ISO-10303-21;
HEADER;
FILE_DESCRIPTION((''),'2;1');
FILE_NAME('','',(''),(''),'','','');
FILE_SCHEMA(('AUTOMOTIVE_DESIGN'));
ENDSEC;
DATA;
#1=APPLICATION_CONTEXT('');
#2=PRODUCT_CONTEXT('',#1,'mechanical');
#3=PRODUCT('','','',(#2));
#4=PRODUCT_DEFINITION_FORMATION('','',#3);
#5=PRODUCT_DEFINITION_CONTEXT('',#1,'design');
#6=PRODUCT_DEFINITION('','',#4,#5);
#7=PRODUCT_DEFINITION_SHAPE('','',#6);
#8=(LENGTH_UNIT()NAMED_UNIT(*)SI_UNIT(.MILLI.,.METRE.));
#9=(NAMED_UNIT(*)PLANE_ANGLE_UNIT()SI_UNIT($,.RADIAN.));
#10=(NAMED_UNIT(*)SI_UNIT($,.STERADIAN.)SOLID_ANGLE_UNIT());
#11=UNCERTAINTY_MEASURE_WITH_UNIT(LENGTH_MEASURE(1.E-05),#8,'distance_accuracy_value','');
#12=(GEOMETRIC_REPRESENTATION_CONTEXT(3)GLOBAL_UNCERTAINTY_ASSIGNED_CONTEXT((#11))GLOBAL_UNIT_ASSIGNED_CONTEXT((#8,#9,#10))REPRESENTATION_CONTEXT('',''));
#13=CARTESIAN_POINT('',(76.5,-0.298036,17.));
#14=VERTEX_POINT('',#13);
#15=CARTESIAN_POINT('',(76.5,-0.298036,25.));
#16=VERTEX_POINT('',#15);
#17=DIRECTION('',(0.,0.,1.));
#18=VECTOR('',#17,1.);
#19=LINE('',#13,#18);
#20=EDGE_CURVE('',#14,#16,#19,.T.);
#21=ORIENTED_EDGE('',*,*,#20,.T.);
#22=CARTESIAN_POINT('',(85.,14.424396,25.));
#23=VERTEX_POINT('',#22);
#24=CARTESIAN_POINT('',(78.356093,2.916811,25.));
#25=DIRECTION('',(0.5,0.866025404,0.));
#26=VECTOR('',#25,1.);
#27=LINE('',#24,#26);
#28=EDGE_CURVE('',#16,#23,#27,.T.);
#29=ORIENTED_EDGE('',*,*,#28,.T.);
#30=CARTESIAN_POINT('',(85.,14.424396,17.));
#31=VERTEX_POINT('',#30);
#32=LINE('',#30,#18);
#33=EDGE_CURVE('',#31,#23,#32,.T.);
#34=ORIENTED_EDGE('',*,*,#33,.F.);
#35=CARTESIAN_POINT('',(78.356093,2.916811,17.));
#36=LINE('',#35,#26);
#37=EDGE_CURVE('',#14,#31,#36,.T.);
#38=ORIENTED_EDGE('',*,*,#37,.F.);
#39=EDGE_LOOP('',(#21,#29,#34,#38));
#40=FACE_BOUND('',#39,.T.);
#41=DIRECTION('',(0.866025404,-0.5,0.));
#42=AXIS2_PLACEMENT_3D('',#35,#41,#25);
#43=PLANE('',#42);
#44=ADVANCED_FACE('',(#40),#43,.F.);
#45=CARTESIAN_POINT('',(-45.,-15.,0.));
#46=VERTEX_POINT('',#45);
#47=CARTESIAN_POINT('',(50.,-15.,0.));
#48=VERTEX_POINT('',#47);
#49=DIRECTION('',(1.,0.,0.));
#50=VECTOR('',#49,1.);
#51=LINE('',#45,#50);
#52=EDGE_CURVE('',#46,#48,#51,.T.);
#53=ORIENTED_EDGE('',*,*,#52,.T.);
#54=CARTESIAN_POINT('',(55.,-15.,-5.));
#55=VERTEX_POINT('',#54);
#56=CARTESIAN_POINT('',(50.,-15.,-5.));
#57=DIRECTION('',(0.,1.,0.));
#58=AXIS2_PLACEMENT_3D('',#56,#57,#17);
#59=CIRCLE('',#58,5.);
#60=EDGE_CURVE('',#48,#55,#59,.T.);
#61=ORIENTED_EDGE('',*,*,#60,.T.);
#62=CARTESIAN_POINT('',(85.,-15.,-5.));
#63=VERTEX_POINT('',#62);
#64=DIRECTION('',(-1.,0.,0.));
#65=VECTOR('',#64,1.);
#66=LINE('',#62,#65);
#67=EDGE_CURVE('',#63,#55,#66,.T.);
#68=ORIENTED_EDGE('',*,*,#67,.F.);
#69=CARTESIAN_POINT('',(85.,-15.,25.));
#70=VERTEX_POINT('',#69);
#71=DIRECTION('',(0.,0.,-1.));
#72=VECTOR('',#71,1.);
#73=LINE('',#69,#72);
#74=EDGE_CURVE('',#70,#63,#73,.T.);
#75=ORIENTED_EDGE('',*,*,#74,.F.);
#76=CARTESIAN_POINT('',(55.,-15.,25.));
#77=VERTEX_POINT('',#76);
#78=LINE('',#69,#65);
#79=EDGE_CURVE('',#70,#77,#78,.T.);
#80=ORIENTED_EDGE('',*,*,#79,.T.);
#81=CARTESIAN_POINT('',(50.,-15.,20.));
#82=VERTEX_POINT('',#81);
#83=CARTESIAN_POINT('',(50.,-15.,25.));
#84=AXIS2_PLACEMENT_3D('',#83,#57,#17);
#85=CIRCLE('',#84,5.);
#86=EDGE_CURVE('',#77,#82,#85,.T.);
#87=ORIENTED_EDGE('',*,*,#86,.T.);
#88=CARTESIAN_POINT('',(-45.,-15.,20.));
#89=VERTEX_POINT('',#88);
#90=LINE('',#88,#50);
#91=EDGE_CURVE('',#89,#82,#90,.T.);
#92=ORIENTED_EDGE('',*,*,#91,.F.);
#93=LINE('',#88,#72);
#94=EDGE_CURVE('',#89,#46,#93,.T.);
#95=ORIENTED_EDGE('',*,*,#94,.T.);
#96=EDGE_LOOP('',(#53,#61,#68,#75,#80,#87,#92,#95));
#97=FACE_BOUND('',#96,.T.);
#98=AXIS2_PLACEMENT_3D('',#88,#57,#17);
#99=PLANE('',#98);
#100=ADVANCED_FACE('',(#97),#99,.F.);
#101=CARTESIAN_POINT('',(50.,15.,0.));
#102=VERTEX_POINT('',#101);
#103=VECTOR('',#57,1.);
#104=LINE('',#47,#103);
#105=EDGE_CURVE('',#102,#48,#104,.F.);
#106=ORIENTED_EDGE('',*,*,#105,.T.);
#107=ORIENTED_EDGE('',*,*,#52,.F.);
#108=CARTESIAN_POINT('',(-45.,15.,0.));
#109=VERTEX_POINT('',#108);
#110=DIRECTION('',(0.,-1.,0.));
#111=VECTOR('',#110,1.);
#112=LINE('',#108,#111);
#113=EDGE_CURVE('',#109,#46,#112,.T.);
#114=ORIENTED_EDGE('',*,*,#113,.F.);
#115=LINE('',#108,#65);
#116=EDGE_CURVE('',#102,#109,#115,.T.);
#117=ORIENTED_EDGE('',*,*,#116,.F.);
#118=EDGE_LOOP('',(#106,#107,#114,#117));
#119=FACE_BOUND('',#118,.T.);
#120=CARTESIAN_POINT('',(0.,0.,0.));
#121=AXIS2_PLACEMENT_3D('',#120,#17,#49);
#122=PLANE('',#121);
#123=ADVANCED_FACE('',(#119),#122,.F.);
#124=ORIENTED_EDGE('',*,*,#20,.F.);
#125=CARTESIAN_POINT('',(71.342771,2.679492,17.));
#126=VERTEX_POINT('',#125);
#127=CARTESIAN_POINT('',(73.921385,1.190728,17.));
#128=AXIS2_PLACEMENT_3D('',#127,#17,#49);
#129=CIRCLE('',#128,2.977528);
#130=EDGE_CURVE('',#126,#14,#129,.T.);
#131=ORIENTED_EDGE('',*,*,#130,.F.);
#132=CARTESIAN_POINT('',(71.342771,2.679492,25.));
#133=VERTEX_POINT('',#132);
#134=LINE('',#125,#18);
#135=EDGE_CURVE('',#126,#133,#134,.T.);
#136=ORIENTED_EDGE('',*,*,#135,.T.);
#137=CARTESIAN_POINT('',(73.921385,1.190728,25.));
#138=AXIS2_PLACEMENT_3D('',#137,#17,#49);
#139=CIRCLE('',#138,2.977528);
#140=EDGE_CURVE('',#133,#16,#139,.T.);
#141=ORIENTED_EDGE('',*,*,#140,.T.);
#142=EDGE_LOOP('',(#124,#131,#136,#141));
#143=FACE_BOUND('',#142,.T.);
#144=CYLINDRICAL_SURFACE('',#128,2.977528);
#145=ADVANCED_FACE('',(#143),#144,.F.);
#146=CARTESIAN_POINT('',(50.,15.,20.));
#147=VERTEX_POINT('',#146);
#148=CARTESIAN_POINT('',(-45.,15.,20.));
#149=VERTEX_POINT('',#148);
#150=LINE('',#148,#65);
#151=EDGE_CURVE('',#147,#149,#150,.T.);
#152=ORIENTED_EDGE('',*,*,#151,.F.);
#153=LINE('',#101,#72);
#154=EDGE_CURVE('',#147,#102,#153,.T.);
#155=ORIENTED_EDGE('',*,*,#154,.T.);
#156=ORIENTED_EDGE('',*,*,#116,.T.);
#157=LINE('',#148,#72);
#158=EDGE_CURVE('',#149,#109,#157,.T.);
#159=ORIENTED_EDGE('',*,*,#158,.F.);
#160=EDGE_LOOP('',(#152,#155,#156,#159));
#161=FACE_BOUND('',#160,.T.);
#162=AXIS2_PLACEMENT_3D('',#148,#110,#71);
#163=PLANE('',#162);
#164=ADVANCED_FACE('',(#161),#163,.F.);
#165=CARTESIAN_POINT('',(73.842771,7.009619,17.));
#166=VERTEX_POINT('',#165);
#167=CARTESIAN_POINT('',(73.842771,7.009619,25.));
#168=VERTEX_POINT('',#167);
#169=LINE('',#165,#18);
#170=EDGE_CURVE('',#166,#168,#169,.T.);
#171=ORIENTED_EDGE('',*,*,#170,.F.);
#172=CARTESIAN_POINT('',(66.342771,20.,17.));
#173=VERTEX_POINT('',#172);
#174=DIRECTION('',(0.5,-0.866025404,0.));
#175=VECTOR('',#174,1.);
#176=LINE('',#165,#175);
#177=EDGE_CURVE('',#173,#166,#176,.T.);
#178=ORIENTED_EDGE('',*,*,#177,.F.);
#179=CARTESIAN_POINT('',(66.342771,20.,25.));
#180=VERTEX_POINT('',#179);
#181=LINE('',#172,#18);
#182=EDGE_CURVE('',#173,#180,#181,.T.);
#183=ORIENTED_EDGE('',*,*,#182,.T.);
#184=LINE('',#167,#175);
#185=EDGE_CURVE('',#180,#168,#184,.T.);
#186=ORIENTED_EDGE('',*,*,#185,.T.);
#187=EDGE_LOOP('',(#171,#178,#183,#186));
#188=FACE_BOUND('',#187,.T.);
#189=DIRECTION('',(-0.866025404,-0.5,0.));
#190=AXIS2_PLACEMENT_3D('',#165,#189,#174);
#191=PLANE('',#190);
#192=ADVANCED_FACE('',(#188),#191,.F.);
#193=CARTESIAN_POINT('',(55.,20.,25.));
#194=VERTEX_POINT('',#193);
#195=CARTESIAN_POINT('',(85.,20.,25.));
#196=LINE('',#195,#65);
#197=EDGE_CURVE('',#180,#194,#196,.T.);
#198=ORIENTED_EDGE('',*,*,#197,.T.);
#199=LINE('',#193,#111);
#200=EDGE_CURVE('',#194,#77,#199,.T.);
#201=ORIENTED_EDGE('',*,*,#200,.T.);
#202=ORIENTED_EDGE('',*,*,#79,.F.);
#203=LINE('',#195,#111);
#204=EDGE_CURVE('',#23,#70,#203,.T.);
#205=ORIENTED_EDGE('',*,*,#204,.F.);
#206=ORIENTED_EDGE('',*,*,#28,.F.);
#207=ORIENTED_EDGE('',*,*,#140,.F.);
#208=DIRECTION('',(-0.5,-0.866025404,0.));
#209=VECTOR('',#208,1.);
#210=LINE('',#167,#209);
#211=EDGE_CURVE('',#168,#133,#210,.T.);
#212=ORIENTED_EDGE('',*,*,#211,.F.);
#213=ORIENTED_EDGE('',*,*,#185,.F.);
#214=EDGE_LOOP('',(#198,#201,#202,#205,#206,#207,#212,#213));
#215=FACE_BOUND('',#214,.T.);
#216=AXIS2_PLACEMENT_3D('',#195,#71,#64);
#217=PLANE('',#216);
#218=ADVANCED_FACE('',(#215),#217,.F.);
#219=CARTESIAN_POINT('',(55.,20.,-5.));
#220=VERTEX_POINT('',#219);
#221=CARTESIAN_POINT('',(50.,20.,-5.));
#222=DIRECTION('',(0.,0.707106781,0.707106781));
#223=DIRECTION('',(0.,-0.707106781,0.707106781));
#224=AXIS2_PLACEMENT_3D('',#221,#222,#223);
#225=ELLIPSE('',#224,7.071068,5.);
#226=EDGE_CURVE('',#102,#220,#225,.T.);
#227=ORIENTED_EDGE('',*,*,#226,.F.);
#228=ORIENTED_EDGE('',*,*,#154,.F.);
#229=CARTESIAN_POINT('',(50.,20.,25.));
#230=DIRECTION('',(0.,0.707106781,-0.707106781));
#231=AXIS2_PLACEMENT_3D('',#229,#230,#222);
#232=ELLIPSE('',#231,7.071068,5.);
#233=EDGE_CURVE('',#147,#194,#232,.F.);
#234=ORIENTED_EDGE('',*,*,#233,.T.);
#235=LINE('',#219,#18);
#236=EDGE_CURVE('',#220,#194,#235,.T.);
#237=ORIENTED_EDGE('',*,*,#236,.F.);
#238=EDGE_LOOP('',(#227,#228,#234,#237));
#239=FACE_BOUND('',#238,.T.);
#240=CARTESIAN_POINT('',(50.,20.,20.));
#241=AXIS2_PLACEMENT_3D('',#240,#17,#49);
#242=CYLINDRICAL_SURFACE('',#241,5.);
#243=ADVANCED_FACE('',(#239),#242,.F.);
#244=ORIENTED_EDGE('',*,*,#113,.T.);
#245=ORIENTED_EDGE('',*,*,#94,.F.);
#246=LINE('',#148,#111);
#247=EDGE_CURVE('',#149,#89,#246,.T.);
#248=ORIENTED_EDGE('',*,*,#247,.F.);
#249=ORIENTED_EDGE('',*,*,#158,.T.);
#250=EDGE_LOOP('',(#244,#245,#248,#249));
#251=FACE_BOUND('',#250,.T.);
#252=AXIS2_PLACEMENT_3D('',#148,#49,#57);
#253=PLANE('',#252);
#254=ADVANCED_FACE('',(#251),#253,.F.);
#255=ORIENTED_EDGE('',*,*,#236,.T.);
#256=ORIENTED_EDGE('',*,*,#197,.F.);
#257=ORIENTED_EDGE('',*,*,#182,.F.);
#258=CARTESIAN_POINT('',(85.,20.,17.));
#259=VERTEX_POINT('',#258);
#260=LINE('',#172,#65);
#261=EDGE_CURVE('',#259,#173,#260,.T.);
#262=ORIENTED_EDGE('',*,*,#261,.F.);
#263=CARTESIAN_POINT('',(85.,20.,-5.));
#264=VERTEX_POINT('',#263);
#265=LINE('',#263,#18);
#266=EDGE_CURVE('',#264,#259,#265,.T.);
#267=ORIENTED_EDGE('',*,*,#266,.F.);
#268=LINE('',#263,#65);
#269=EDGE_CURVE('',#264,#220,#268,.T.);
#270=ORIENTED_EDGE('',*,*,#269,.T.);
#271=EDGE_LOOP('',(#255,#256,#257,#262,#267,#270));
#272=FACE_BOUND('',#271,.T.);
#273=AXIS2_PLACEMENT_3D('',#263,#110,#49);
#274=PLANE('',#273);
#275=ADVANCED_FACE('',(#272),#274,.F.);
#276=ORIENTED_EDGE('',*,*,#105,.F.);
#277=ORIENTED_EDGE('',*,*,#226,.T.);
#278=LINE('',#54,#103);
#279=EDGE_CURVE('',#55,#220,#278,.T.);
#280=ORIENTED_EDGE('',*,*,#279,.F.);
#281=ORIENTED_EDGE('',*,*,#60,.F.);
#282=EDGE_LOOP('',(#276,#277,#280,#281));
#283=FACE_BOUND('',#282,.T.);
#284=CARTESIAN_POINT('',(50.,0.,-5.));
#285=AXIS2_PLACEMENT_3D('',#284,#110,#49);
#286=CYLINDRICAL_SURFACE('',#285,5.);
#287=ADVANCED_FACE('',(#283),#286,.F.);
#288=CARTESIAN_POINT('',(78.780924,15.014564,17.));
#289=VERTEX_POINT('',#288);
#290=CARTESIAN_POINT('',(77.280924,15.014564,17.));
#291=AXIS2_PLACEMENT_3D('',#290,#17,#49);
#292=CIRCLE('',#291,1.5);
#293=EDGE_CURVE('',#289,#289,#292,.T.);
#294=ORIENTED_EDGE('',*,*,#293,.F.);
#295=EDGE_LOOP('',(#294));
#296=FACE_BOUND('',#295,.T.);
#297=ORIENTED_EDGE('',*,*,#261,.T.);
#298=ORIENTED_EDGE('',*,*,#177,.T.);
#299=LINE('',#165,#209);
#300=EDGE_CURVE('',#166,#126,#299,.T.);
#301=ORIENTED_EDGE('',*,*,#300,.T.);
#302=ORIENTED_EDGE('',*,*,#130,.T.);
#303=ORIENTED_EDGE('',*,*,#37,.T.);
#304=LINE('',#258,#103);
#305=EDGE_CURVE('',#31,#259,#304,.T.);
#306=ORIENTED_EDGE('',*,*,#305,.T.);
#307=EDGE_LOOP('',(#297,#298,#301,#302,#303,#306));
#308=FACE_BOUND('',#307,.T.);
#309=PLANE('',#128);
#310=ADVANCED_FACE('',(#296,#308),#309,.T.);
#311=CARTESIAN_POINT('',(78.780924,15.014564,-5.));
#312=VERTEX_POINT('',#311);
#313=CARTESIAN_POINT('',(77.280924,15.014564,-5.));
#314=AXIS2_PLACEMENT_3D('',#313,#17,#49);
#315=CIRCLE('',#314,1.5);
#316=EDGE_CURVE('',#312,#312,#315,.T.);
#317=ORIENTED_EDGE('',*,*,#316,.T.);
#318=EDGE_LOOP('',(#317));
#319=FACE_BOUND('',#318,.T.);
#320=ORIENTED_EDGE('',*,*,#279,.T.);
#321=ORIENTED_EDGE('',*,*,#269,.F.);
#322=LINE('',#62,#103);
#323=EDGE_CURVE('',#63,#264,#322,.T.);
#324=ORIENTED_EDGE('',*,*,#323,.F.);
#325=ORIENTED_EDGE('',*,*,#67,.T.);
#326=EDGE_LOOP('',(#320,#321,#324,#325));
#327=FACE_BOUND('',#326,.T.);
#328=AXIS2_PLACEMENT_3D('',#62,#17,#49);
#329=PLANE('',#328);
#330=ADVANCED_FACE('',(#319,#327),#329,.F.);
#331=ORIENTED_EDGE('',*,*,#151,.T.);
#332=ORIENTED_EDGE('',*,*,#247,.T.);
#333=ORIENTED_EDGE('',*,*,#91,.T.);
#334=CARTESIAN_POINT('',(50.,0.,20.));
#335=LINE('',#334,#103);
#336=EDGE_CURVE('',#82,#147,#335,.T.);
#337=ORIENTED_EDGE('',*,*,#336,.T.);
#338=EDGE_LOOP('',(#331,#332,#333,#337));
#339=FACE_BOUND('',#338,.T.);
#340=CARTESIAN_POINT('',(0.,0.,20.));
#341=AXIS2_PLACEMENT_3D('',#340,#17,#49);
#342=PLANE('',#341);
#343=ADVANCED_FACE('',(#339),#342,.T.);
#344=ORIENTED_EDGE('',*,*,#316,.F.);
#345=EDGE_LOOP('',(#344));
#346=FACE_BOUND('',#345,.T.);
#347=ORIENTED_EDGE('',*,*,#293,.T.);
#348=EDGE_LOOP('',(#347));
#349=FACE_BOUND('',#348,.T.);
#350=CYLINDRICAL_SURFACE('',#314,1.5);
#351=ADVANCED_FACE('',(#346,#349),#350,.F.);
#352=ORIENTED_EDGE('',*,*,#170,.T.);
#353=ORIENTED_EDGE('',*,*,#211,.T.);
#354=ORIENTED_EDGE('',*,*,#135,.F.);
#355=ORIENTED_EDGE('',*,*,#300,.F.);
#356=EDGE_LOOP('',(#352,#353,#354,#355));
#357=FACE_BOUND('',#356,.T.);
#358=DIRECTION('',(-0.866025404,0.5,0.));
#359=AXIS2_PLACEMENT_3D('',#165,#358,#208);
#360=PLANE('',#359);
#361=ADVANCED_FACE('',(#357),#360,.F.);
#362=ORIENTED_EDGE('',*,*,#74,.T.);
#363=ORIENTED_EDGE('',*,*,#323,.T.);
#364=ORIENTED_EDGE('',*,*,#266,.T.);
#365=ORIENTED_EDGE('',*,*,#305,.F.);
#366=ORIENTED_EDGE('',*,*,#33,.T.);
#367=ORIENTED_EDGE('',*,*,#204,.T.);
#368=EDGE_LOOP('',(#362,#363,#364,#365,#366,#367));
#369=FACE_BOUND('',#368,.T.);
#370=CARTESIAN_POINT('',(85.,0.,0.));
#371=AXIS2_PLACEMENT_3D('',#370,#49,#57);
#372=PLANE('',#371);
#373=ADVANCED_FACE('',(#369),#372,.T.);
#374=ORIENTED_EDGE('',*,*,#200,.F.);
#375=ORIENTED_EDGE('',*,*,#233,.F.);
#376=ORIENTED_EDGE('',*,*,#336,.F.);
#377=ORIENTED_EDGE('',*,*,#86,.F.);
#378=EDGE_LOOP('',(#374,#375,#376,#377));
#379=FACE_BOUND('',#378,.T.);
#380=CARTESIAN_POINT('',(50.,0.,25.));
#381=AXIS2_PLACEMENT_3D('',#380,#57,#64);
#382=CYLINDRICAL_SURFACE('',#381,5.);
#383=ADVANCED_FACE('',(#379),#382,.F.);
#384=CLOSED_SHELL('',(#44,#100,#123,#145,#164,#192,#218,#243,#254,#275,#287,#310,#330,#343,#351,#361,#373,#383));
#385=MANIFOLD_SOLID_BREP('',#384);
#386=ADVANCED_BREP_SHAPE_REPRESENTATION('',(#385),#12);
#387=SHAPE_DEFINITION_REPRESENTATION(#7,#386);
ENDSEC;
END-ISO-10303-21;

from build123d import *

# Parameters (mm, degrees)
SKETCH_1_W          = 100
SKETCH_1_H          = 30
EXTRUDE_1_DEPTH     = 20
SKETCH_2_W          = 30
SKETCH_2_H          = 35
EXTRUDE_2_DEPTH     = 30
FILLET_1_R          = 5
CUT_EXTRUDE_1_DEPTH = 8
SKETCH_4_R          = 1.5
CUT_EXTRUDE_2_DEPTH = 91.049986119


with BuildPart() as part:
    # 草图1 → 凸台-拉伸1 (new body)
    with BuildSketch(Plane.XY):
        with Locations((5, 0)):
            Rectangle(SKETCH_1_W, SKETCH_1_H)
    extrude(amount=EXTRUDE_1_DEPTH)

    # 草图2 → 凸台-拉伸2 (add)
    with BuildSketch(Plane(origin=(55, 0, 0), x_dir=(0, 0, -1), z_dir=(1, 0, 0))):
        with Locations((-10, 2.5)):
            Rectangle(SKETCH_2_W, SKETCH_2_H)
    extrude(amount=EXTRUDE_2_DEPTH)

    # 圆角1
    fillet_1_edges = [part.edges().sort_by_distance(p)[0] for p in [
        (55, 0, 0),
        (55, 15, 10),
        (55, 0, 20),
    ]]
    fillet(fillet_1_edges, radius=FILLET_1_R - 0.0001)  # a hair under: the kernel refuses the full size

    # 草图3 → 切除-拉伸1 (cut)
    with BuildSketch(Plane.XY.offset(25)):
        with BuildLine():
            Line((73.842770799, 7.009618943), (66.342770799, 20))
            Line((66.342770799, 20), (85, 20))
            Line((85, 20), (85, 14.424396121))
            Line((85, 14.424396121), (78.356092757, 2.916811216))
            Line((78.356092757, 2.916811216), (76.5, -0.298035743))
            ThreePointArc((76.5, -0.298035743), (72.432621566, -1.38788651), (71.342770799, 2.679491924))
            Line((71.342770799, 2.679491924), (73.842770799, 7.009618943))
        make_face()
    extrude(amount=-CUT_EXTRUDE_1_DEPTH, mode=Mode.SUBTRACT)

    # 草图4 → 切除-拉伸2 (cut, through all)
    with BuildSketch(Plane.XY.offset(17)):
        with Locations((77.2809236, 15.014563609)):
            Circle(SKETCH_4_R)
    extrude(amount=-CUT_EXTRUDE_2_DEPTH, mode=Mode.SUBTRACT)


solid = part.part
